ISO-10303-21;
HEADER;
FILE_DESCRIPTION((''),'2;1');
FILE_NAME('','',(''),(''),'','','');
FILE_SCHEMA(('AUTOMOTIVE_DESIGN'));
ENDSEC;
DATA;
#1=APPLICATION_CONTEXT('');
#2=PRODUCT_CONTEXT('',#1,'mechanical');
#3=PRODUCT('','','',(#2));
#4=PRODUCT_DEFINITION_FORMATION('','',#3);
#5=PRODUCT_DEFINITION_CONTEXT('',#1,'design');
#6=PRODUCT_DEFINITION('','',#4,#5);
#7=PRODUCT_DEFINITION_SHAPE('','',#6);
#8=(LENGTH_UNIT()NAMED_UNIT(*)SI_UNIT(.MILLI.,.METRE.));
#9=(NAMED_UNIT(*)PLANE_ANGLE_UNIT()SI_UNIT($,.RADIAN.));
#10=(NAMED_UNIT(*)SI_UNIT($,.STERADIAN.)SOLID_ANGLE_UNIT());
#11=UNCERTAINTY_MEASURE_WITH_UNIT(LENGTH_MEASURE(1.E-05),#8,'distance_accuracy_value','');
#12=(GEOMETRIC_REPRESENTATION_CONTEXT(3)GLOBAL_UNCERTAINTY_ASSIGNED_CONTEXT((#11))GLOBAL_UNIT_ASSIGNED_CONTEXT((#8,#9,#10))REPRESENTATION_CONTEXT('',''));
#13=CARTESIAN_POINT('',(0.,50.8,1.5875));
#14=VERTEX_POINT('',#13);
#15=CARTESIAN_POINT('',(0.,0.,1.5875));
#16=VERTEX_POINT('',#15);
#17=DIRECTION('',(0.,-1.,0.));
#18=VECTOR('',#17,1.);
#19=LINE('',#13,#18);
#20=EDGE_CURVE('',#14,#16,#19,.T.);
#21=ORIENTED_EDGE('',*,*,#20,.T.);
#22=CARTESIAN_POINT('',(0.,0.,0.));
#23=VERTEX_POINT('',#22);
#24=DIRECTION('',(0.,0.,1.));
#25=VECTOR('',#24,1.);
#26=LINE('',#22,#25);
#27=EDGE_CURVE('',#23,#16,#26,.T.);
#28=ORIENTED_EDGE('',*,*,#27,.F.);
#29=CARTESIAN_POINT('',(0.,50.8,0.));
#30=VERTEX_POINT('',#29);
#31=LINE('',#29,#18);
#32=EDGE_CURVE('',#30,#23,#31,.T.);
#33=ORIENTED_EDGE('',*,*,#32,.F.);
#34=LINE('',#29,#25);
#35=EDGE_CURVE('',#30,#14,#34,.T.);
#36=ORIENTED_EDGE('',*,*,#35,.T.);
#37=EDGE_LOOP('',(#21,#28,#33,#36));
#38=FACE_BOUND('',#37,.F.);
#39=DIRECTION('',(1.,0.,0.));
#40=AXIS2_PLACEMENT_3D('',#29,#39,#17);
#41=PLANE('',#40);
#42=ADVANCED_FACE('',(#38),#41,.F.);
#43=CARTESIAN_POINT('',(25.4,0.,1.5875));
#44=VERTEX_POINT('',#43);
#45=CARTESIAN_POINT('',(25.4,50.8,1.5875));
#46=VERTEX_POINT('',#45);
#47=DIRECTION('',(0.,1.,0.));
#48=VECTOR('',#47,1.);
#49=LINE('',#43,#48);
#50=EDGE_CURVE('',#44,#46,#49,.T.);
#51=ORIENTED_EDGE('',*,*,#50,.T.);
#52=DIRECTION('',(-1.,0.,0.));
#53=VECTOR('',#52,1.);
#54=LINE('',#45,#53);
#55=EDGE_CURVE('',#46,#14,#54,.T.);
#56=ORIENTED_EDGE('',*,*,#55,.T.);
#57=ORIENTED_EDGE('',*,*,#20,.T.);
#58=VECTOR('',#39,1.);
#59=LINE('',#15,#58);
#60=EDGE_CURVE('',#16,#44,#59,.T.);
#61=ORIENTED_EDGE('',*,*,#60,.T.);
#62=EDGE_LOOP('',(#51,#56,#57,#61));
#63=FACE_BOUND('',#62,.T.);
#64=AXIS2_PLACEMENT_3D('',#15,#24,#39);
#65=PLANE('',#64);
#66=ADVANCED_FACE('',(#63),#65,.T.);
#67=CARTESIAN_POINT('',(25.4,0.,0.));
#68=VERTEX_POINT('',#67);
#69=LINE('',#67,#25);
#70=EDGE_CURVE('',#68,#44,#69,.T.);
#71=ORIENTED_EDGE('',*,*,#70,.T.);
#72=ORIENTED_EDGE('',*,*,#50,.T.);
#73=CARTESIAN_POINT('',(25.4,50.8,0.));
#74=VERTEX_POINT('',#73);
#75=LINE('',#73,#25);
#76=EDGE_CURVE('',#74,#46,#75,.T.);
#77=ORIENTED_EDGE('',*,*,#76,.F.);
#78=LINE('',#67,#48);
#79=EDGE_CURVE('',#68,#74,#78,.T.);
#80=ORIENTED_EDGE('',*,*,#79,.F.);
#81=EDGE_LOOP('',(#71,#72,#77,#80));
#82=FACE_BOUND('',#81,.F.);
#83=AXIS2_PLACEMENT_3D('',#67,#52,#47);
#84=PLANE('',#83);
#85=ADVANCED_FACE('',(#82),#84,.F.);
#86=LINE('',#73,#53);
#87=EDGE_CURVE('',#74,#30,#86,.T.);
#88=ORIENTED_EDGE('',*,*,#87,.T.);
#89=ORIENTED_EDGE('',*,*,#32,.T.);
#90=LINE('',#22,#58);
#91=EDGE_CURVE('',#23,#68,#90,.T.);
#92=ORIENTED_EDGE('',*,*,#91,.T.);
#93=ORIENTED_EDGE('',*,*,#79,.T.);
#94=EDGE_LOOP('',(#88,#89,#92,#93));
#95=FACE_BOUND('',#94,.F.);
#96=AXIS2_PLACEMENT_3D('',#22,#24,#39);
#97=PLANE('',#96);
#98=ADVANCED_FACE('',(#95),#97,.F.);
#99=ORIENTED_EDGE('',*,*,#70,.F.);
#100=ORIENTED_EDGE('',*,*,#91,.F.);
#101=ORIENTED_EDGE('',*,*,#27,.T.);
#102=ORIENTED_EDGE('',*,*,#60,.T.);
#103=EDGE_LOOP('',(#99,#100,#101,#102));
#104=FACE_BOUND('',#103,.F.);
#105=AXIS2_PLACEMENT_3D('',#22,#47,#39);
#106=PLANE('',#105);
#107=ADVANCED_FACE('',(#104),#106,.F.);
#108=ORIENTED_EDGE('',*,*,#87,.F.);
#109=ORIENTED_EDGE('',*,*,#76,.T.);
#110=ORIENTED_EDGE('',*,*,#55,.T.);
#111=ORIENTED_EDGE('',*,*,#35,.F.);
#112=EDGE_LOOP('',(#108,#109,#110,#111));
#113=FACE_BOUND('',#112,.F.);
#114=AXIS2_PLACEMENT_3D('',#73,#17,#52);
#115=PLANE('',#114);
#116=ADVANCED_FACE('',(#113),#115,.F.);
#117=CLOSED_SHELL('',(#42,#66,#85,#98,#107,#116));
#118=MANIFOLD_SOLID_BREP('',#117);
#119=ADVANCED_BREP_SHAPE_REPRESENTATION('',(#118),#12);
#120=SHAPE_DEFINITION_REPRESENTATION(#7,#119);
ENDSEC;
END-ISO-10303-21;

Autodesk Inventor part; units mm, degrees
ref_plane "YZ Plane" through (0, 0, 0) normal (1, 0, 0) x (0, 1, 0)
ref_plane "XZ Plane" through (0, 0, 0) normal (0, 1, 0) x (-1, 0, 0)
ref_plane "XY Plane" through (0, 0, 0) normal (0, 0, 1) x (1, 0, 0)
sketch "Sketch1" plane through (0, 0, 0) normal (0, 0, 1) x (1, 0, 0)
  line L0 (0, 0) -> (25.4, 0)
  line L1 (25.4, 0) -> (25.4, 50.8)
  line L2 (25.4, 50.8) -> (0, 50.8)
  line L3 (0, 50.8) -> (0, 0)
  dimension "d0" = 25.4
  dimension "d1" = 50.8
extrude "Plate1" add sketch "Sketch1" along normal blind 1.5875
equation "\"BendRadius\" = Thickness"
equation "\"BendReliefWidth\" = Thickness"
equation "\"BendReliefDepth\" = 0.5 * Thickness"
equation "\"CornerReliefSize\" = 4 * Thickness"
equation "\"MinimumRemnant\" = 2 * Thickness"
equation "\"TransitionRadius\" = BendRadius"
equation "\"JacobiRadiusSize\" = BendRadius"
equation "\"GapSize\" = Thickness"
equation "\"d2\" = BendRadius"
equation "\"Thickness\" = 1.5875"
properties part number "Bumper Rail Stand Bottom Cap"
